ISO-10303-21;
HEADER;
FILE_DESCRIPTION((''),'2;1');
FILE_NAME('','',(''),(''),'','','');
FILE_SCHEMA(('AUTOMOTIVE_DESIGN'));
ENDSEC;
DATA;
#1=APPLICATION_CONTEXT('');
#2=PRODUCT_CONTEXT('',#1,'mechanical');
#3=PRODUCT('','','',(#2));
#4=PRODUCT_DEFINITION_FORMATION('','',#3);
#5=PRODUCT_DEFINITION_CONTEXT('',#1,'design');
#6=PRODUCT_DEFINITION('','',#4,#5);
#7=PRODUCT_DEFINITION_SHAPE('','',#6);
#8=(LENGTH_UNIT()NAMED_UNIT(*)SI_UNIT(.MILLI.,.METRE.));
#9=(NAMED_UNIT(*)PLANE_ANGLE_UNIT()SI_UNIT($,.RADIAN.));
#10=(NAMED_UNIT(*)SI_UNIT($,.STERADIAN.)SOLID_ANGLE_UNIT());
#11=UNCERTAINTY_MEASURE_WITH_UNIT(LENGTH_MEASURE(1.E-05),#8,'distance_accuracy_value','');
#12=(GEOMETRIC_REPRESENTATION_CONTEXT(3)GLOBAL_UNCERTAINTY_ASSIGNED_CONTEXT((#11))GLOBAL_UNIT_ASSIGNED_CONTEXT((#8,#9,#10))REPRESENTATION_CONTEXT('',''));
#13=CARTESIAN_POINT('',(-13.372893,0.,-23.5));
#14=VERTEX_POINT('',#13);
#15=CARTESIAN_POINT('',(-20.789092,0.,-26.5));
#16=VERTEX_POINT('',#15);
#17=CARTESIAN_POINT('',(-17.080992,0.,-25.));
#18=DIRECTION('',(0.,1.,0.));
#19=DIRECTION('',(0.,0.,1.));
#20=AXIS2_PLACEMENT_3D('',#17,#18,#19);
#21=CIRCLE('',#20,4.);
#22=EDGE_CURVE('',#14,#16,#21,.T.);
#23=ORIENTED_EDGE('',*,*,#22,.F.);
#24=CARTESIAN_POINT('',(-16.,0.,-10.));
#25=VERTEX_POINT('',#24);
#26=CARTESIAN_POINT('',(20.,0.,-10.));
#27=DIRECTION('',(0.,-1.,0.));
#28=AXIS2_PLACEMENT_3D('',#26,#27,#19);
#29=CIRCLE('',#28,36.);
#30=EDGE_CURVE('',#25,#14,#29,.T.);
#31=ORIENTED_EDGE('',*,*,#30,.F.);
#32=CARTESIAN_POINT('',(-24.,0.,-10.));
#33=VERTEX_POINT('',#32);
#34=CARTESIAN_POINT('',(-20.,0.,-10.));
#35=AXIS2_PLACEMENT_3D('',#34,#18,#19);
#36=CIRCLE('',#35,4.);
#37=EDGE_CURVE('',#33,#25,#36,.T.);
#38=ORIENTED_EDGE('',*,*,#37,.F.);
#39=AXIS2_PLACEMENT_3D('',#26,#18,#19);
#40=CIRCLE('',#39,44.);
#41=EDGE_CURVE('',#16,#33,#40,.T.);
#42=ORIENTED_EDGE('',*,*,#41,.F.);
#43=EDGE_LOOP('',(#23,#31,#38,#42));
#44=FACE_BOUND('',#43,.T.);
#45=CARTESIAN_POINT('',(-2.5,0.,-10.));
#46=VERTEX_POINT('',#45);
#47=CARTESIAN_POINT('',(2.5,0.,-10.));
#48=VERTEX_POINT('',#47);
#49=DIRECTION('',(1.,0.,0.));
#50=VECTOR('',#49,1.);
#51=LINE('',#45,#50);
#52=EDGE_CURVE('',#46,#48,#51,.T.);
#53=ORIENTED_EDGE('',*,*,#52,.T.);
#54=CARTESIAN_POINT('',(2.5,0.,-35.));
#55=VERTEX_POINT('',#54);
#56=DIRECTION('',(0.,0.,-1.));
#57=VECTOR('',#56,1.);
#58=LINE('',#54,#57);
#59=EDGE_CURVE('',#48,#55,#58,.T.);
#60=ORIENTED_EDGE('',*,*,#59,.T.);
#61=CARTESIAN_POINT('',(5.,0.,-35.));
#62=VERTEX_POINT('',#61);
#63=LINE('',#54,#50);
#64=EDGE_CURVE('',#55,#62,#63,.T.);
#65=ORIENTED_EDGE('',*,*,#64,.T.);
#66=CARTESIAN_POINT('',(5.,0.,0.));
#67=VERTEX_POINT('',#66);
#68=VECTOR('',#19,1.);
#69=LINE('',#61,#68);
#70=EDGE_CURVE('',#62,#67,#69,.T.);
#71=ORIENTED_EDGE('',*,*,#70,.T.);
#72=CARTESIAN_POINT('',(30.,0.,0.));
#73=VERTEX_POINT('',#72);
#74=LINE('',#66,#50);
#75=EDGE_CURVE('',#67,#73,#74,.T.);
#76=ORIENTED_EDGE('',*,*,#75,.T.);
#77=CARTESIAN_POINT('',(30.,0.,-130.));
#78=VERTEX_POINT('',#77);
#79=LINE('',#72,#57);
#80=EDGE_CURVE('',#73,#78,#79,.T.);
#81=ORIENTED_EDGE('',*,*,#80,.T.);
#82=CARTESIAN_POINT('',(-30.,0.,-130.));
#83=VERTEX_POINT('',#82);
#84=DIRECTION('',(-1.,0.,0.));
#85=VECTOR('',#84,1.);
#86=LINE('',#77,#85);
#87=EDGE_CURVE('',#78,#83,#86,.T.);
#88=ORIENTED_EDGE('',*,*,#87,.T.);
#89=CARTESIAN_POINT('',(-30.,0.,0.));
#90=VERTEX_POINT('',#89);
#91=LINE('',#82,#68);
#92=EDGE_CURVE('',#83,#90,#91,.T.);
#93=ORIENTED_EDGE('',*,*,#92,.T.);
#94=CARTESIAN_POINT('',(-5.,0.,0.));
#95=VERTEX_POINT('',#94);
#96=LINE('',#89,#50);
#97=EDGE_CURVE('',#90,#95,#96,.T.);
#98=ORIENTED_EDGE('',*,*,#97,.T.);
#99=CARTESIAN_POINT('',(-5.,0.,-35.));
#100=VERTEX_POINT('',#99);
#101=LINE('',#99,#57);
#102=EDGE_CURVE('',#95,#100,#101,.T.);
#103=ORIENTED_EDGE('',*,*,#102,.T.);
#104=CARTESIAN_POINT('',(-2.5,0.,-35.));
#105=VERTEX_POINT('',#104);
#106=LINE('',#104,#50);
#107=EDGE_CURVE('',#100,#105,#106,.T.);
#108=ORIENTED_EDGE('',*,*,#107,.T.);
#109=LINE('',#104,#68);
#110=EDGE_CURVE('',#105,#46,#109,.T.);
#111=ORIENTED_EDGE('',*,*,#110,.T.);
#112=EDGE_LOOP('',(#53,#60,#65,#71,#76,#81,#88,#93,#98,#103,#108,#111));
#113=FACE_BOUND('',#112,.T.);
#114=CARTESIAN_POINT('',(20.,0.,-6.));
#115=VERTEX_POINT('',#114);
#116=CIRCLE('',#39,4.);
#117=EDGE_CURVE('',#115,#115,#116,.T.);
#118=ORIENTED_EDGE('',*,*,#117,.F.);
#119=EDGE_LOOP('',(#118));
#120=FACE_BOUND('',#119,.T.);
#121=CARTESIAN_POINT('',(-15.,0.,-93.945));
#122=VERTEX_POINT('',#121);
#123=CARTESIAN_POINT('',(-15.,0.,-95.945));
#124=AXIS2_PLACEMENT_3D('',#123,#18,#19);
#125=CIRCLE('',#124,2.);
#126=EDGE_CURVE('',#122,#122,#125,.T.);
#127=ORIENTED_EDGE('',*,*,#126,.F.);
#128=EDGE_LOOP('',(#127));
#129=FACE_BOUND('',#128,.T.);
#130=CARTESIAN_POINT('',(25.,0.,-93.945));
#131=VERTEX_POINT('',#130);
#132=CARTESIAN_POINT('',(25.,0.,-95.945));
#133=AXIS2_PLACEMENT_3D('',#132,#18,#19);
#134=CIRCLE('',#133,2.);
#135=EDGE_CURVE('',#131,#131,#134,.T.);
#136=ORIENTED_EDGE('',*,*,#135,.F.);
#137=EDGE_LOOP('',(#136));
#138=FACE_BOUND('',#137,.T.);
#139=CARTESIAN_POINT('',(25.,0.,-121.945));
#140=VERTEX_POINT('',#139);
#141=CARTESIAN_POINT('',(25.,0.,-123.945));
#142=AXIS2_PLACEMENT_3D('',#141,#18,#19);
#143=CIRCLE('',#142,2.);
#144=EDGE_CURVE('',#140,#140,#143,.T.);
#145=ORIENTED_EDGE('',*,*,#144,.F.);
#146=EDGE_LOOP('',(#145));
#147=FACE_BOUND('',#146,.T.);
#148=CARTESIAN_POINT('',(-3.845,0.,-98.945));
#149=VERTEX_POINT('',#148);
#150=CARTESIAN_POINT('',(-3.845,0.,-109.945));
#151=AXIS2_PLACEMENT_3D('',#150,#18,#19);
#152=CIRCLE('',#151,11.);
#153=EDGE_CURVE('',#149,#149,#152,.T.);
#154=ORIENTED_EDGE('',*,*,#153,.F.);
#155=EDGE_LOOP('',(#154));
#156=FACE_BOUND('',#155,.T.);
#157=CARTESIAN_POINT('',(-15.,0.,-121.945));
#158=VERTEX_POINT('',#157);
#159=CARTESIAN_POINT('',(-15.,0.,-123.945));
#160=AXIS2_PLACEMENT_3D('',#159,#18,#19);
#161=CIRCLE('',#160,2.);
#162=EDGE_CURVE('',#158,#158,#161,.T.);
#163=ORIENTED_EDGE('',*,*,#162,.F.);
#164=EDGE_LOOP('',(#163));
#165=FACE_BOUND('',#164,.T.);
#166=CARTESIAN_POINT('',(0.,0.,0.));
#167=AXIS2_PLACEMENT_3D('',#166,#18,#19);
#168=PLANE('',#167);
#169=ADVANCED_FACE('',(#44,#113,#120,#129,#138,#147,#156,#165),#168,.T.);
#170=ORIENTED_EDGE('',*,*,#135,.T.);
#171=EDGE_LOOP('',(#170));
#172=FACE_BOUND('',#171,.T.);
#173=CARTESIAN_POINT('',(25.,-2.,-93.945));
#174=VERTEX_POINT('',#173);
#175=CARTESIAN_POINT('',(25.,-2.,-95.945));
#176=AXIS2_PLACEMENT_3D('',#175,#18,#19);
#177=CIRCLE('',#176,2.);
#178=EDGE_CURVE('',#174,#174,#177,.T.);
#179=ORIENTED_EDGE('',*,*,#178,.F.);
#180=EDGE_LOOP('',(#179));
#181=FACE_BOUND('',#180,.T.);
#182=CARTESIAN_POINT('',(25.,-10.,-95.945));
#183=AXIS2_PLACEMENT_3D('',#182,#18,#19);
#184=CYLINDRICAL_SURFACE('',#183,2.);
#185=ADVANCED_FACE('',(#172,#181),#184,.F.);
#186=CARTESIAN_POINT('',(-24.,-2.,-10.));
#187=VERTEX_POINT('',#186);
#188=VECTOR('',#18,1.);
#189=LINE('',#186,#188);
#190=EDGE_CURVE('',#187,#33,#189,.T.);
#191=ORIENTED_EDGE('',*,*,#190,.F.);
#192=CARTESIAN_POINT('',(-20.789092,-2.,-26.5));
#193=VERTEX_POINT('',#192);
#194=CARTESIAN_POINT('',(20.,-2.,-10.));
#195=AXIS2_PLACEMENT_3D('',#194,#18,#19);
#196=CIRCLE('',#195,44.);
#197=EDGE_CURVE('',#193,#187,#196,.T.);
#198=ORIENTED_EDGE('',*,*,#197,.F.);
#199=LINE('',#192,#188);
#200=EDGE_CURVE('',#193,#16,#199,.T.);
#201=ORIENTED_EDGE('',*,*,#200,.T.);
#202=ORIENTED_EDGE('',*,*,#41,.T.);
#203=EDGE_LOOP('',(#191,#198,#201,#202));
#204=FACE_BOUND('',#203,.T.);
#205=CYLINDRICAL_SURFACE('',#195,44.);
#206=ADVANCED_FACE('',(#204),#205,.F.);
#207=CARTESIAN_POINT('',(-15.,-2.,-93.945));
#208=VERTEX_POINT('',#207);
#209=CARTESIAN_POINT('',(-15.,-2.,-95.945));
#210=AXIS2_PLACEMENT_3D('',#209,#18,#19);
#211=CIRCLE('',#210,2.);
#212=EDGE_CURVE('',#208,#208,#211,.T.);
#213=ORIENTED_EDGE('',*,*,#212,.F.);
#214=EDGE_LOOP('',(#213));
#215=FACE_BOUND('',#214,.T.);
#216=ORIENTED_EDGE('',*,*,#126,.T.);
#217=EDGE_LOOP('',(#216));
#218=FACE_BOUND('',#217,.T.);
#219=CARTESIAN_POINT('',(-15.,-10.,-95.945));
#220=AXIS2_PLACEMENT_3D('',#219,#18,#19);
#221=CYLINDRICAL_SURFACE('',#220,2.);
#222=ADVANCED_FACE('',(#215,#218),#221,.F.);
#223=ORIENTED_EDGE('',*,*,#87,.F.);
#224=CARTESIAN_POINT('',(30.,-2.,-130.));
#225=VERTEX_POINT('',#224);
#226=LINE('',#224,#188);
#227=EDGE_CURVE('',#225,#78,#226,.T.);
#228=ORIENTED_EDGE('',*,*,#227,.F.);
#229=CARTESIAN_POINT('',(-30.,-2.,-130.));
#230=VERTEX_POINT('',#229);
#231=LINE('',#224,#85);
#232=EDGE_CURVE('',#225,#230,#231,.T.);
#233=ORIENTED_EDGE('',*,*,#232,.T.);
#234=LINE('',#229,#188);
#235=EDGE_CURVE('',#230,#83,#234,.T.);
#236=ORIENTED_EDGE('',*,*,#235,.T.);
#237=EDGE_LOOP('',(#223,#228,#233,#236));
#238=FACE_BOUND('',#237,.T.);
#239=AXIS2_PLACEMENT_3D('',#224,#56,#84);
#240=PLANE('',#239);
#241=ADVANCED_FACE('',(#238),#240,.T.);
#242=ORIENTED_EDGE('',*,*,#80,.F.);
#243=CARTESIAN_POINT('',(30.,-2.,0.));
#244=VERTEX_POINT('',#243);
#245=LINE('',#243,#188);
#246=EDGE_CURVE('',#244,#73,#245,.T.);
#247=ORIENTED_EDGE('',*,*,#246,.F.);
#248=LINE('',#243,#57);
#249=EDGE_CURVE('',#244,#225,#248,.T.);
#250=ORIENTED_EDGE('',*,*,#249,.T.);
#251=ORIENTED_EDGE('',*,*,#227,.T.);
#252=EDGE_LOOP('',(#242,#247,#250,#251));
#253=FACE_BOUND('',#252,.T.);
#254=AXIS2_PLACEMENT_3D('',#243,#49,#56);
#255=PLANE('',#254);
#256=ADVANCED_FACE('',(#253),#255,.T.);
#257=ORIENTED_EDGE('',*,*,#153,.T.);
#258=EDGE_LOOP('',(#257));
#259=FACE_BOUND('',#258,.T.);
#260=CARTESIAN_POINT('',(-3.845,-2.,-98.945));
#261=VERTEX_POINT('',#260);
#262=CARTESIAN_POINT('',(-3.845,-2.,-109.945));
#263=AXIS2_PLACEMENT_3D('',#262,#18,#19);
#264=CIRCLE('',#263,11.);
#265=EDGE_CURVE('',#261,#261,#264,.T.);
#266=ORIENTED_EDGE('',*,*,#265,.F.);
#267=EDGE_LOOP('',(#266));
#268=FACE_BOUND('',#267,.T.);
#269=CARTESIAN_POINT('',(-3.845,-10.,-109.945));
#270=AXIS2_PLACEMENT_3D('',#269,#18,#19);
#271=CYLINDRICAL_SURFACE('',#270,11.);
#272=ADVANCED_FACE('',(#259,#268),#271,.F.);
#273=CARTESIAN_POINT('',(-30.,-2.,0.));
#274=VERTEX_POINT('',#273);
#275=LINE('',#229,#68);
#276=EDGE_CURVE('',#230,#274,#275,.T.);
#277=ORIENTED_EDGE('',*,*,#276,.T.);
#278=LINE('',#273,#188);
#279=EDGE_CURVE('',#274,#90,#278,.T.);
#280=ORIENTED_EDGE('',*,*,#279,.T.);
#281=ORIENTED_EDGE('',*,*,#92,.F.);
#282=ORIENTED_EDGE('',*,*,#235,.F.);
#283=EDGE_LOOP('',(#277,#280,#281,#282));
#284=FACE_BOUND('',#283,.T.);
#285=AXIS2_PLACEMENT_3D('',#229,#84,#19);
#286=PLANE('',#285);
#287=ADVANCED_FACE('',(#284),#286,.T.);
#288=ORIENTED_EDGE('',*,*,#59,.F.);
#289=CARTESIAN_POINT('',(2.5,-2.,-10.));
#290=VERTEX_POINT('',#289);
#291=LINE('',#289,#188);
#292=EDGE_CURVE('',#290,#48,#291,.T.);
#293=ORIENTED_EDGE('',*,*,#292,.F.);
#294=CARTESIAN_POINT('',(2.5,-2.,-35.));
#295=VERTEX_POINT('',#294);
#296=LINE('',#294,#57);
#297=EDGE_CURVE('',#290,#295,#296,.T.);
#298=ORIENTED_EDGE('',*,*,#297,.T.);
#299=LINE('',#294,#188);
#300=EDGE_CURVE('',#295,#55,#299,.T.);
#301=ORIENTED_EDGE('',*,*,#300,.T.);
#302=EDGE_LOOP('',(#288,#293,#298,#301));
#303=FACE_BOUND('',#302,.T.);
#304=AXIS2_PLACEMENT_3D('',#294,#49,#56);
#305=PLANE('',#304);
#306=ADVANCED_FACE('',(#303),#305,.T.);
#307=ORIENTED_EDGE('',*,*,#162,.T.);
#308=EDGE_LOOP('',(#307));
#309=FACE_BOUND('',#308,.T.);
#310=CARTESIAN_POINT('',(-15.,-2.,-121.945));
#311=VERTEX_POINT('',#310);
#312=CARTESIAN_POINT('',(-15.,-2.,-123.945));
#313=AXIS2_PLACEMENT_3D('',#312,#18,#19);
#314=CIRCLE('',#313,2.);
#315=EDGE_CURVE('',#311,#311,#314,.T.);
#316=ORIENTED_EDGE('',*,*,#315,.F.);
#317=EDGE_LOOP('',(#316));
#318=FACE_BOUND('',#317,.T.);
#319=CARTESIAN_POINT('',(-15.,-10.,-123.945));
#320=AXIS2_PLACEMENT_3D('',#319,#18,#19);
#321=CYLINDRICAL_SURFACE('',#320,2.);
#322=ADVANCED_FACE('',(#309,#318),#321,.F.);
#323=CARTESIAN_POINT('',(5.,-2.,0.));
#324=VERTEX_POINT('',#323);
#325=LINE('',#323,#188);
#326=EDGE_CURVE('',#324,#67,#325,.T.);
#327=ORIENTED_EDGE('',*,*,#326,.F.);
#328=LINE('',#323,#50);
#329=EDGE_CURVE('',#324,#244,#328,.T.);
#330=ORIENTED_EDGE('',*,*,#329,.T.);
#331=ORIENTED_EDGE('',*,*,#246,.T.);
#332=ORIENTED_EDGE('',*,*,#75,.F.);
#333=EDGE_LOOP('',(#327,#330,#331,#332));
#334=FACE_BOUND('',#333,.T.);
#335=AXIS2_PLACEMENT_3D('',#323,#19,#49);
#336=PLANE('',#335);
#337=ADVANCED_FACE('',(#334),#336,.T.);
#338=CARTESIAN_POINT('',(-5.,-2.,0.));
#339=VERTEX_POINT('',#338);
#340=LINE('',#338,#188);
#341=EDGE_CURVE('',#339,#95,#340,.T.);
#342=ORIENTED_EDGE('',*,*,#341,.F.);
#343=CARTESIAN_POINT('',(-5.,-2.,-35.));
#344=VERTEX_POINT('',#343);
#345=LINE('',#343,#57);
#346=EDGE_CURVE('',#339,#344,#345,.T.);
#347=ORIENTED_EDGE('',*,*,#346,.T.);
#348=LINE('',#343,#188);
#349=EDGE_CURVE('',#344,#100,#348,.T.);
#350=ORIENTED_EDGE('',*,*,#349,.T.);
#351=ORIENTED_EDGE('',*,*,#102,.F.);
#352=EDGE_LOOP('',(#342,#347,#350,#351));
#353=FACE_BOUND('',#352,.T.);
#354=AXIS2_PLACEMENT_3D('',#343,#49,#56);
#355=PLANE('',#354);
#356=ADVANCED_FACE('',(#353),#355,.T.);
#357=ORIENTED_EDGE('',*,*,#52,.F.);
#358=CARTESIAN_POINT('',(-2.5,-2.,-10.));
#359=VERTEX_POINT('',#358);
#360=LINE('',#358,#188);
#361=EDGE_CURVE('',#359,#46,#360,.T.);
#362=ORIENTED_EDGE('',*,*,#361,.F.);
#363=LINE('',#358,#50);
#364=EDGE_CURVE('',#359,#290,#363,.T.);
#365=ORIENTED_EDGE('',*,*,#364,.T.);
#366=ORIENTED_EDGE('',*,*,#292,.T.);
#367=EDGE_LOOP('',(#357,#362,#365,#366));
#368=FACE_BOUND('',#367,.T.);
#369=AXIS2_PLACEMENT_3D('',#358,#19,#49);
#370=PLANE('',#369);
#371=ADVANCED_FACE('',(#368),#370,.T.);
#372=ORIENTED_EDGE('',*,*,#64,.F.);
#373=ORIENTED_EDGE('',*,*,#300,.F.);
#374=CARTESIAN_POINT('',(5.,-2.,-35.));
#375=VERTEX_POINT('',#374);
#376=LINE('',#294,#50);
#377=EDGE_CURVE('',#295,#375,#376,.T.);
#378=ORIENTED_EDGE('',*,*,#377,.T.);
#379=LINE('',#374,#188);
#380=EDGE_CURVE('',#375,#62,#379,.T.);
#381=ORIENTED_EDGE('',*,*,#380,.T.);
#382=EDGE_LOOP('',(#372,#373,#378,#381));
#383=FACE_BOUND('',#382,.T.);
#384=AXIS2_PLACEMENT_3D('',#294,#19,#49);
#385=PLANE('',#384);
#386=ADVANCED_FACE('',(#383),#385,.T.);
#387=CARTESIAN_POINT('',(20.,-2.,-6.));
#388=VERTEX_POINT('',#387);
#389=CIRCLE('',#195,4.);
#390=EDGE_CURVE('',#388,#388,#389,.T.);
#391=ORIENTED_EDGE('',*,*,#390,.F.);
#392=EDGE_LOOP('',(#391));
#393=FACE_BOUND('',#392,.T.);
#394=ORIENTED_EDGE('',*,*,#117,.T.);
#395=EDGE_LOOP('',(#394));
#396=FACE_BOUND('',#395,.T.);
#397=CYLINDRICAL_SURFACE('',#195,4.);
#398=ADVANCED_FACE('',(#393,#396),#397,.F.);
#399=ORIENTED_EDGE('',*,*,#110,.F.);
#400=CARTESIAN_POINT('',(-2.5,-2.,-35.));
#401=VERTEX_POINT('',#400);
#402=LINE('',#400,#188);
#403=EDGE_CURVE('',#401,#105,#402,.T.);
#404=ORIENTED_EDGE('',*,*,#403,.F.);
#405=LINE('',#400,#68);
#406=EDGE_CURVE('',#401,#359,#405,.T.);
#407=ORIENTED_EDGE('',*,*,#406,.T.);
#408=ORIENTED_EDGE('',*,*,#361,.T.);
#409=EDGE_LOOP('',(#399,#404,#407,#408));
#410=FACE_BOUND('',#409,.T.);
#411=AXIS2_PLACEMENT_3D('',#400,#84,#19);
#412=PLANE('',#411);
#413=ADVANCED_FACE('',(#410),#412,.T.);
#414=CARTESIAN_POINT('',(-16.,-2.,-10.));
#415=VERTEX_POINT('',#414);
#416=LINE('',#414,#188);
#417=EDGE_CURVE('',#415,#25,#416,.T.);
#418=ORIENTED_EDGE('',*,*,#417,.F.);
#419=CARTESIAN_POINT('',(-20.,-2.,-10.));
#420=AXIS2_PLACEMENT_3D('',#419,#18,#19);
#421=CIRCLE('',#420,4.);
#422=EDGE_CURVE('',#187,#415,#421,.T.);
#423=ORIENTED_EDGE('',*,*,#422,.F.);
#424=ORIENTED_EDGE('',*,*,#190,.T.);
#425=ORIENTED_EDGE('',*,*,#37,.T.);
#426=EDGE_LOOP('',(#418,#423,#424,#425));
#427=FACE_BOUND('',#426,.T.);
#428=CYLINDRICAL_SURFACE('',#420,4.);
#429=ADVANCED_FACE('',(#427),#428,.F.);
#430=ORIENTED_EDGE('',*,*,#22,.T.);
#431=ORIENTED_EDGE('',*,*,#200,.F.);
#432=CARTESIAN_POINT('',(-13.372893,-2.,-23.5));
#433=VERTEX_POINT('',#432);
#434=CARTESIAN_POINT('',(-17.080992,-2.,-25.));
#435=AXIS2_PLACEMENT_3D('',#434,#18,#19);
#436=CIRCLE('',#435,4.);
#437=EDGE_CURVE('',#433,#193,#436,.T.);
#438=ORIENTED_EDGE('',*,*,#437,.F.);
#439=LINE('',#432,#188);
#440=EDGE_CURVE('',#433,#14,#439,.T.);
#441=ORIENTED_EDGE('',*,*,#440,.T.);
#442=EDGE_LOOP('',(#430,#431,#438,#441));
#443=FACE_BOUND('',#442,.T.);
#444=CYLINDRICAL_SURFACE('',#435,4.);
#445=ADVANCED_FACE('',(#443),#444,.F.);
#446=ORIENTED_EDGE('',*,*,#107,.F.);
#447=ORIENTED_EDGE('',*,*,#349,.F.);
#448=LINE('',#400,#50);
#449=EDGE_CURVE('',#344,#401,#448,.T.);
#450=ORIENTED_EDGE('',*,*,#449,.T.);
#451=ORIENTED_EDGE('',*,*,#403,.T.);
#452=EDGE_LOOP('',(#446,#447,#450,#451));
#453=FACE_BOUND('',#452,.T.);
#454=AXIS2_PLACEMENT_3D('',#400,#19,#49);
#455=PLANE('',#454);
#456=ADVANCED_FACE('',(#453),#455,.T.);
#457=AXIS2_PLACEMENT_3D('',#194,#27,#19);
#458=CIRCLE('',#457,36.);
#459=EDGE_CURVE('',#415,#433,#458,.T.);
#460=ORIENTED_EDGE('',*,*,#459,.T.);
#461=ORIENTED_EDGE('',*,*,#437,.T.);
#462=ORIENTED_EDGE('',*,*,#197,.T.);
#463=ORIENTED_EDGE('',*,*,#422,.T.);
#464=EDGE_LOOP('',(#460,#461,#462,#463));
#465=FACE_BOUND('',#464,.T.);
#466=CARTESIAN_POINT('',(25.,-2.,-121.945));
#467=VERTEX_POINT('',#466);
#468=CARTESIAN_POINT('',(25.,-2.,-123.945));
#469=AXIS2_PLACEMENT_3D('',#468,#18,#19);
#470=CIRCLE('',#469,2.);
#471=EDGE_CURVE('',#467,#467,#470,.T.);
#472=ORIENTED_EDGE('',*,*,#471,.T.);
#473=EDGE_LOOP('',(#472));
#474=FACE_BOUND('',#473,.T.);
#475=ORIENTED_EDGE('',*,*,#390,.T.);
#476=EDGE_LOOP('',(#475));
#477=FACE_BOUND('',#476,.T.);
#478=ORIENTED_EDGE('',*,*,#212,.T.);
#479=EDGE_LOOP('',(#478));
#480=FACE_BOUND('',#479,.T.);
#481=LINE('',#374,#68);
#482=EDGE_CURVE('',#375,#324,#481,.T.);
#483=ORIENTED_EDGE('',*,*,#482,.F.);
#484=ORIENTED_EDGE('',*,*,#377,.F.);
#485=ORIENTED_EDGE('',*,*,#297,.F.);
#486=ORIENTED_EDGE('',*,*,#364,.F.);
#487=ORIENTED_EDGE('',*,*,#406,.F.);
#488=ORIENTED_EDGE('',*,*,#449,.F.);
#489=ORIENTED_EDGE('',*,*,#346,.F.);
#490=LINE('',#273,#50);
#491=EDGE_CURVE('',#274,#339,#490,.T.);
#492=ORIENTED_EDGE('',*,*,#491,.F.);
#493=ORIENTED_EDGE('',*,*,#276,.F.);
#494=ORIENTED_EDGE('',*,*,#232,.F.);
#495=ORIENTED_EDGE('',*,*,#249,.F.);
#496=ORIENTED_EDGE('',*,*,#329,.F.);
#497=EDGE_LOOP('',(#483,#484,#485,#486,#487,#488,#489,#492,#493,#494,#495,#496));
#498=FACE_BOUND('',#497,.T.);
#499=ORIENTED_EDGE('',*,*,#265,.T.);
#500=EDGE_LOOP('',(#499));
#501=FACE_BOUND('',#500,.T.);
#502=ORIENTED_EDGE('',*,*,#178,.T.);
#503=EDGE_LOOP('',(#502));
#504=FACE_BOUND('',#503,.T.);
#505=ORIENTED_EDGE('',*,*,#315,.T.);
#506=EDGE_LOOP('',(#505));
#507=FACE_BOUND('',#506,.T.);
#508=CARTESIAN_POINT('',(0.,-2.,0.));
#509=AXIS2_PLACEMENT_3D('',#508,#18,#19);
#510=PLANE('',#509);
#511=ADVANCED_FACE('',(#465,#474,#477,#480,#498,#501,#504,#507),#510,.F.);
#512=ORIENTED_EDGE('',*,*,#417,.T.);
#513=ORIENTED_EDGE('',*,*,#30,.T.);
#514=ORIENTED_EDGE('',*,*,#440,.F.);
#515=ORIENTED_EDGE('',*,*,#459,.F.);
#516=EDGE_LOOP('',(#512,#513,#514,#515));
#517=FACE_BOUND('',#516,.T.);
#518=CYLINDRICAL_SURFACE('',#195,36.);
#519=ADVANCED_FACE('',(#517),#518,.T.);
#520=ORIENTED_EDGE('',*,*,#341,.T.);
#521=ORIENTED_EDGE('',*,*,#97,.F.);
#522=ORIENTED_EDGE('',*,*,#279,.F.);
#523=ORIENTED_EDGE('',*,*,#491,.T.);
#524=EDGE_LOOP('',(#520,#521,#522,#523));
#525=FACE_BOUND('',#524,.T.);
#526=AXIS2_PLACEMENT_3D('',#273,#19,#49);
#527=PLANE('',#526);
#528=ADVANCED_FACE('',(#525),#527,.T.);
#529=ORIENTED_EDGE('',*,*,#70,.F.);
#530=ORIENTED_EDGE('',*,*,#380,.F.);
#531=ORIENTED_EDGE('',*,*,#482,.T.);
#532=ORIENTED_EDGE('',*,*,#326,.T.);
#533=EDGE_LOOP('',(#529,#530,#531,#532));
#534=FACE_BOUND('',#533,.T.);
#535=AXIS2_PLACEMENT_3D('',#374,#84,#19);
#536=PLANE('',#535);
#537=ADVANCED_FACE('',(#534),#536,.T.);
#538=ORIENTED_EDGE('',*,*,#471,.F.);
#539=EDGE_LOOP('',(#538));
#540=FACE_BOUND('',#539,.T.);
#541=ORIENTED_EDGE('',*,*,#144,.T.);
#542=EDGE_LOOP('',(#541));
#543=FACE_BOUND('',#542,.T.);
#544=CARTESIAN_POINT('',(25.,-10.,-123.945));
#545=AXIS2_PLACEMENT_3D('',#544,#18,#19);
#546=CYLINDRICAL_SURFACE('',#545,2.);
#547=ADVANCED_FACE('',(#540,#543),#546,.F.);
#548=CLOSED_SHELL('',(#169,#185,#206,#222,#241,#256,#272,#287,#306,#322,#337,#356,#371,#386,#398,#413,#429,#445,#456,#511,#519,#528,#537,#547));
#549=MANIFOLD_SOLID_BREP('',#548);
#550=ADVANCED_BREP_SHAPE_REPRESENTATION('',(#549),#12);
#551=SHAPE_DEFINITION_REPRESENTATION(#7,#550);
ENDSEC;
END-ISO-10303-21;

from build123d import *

# Parameters (mm, degrees)
BRIDA_START           = -2
BRIDA_BASE1_OUTLINE_R = 4
BRIDA_BASE1_DEPTH     = 2
CROQUIS6_R            = 2
CROQUIS6_R_2          = 11
CORTAR_EXTRUIR1_DEPTH = 10


# Read off the part's stored shape, not the designer's step: Brida base1
with BuildPart() as part:
    # Brida base1 outline → Brida base1 (new body)
    with BuildSketch(Plane(origin=(0, 0, 0), x_dir=(1, 0, 0), z_dir=(0, 1, 0)).offset(BRIDA_START)):
        Polygon((5, 35), (5, 0), (30, 0), (30, 130), (-30, 130), (-30, 0), (-5, 0), (-5, 35), (-2.5, 35), (-2.5, 10), (2.5, 10), (2.5, 35), align=None)
        with BuildLine():
            ThreePointArc((-24, 10), (-23.18981381, 18.404759548), (-20.789091679, 26.5))
            ThreePointArc((-20.789091679, 26.5), (-15.580992435, 28.708099244), (-13.372893192, 23.5))
            ThreePointArc((-13.372893192, 23.5), (-15.33712039, 16.876621448), (-16, 10))
            ThreePointArc((-16, 10), (-20, 6), (-24, 10))
        make_face(mode=Mode.SUBTRACT)
        with Locations((20, 10)):
            Circle(BRIDA_BASE1_OUTLINE_R, mode=Mode.SUBTRACT)
    extrude(amount=BRIDA_BASE1_DEPTH)

    # Croquis6 → Cortar-Extruir1 (cut)
    with BuildSketch(Plane(origin=(0, 0, 0), x_dir=(1, 0, 0), z_dir=(0, 1, 0))):
        with Locations(Location((25, 123.945, 0), (0, 0, 270))):
            Circle(CROQUIS6_R)
        with Locations(Location((25, 95.945, 0), (0, 0, 270))):
            Circle(CROQUIS6_R)
        with Locations(Location((-15, 123.945, 0), (0, 0, 270))):
            Circle(CROQUIS6_R)
        with Locations(Location((-15, 95.945, 0), (0, 0, 270))):
            Circle(CROQUIS6_R)
        with Locations(Location((-3.845, 109.945, 0), (0, 0, 270))):
            Circle(CROQUIS6_R_2)
    extrude(amount=-CORTAR_EXTRUIR1_DEPTH, mode=Mode.SUBTRACT)


solid = part.part
